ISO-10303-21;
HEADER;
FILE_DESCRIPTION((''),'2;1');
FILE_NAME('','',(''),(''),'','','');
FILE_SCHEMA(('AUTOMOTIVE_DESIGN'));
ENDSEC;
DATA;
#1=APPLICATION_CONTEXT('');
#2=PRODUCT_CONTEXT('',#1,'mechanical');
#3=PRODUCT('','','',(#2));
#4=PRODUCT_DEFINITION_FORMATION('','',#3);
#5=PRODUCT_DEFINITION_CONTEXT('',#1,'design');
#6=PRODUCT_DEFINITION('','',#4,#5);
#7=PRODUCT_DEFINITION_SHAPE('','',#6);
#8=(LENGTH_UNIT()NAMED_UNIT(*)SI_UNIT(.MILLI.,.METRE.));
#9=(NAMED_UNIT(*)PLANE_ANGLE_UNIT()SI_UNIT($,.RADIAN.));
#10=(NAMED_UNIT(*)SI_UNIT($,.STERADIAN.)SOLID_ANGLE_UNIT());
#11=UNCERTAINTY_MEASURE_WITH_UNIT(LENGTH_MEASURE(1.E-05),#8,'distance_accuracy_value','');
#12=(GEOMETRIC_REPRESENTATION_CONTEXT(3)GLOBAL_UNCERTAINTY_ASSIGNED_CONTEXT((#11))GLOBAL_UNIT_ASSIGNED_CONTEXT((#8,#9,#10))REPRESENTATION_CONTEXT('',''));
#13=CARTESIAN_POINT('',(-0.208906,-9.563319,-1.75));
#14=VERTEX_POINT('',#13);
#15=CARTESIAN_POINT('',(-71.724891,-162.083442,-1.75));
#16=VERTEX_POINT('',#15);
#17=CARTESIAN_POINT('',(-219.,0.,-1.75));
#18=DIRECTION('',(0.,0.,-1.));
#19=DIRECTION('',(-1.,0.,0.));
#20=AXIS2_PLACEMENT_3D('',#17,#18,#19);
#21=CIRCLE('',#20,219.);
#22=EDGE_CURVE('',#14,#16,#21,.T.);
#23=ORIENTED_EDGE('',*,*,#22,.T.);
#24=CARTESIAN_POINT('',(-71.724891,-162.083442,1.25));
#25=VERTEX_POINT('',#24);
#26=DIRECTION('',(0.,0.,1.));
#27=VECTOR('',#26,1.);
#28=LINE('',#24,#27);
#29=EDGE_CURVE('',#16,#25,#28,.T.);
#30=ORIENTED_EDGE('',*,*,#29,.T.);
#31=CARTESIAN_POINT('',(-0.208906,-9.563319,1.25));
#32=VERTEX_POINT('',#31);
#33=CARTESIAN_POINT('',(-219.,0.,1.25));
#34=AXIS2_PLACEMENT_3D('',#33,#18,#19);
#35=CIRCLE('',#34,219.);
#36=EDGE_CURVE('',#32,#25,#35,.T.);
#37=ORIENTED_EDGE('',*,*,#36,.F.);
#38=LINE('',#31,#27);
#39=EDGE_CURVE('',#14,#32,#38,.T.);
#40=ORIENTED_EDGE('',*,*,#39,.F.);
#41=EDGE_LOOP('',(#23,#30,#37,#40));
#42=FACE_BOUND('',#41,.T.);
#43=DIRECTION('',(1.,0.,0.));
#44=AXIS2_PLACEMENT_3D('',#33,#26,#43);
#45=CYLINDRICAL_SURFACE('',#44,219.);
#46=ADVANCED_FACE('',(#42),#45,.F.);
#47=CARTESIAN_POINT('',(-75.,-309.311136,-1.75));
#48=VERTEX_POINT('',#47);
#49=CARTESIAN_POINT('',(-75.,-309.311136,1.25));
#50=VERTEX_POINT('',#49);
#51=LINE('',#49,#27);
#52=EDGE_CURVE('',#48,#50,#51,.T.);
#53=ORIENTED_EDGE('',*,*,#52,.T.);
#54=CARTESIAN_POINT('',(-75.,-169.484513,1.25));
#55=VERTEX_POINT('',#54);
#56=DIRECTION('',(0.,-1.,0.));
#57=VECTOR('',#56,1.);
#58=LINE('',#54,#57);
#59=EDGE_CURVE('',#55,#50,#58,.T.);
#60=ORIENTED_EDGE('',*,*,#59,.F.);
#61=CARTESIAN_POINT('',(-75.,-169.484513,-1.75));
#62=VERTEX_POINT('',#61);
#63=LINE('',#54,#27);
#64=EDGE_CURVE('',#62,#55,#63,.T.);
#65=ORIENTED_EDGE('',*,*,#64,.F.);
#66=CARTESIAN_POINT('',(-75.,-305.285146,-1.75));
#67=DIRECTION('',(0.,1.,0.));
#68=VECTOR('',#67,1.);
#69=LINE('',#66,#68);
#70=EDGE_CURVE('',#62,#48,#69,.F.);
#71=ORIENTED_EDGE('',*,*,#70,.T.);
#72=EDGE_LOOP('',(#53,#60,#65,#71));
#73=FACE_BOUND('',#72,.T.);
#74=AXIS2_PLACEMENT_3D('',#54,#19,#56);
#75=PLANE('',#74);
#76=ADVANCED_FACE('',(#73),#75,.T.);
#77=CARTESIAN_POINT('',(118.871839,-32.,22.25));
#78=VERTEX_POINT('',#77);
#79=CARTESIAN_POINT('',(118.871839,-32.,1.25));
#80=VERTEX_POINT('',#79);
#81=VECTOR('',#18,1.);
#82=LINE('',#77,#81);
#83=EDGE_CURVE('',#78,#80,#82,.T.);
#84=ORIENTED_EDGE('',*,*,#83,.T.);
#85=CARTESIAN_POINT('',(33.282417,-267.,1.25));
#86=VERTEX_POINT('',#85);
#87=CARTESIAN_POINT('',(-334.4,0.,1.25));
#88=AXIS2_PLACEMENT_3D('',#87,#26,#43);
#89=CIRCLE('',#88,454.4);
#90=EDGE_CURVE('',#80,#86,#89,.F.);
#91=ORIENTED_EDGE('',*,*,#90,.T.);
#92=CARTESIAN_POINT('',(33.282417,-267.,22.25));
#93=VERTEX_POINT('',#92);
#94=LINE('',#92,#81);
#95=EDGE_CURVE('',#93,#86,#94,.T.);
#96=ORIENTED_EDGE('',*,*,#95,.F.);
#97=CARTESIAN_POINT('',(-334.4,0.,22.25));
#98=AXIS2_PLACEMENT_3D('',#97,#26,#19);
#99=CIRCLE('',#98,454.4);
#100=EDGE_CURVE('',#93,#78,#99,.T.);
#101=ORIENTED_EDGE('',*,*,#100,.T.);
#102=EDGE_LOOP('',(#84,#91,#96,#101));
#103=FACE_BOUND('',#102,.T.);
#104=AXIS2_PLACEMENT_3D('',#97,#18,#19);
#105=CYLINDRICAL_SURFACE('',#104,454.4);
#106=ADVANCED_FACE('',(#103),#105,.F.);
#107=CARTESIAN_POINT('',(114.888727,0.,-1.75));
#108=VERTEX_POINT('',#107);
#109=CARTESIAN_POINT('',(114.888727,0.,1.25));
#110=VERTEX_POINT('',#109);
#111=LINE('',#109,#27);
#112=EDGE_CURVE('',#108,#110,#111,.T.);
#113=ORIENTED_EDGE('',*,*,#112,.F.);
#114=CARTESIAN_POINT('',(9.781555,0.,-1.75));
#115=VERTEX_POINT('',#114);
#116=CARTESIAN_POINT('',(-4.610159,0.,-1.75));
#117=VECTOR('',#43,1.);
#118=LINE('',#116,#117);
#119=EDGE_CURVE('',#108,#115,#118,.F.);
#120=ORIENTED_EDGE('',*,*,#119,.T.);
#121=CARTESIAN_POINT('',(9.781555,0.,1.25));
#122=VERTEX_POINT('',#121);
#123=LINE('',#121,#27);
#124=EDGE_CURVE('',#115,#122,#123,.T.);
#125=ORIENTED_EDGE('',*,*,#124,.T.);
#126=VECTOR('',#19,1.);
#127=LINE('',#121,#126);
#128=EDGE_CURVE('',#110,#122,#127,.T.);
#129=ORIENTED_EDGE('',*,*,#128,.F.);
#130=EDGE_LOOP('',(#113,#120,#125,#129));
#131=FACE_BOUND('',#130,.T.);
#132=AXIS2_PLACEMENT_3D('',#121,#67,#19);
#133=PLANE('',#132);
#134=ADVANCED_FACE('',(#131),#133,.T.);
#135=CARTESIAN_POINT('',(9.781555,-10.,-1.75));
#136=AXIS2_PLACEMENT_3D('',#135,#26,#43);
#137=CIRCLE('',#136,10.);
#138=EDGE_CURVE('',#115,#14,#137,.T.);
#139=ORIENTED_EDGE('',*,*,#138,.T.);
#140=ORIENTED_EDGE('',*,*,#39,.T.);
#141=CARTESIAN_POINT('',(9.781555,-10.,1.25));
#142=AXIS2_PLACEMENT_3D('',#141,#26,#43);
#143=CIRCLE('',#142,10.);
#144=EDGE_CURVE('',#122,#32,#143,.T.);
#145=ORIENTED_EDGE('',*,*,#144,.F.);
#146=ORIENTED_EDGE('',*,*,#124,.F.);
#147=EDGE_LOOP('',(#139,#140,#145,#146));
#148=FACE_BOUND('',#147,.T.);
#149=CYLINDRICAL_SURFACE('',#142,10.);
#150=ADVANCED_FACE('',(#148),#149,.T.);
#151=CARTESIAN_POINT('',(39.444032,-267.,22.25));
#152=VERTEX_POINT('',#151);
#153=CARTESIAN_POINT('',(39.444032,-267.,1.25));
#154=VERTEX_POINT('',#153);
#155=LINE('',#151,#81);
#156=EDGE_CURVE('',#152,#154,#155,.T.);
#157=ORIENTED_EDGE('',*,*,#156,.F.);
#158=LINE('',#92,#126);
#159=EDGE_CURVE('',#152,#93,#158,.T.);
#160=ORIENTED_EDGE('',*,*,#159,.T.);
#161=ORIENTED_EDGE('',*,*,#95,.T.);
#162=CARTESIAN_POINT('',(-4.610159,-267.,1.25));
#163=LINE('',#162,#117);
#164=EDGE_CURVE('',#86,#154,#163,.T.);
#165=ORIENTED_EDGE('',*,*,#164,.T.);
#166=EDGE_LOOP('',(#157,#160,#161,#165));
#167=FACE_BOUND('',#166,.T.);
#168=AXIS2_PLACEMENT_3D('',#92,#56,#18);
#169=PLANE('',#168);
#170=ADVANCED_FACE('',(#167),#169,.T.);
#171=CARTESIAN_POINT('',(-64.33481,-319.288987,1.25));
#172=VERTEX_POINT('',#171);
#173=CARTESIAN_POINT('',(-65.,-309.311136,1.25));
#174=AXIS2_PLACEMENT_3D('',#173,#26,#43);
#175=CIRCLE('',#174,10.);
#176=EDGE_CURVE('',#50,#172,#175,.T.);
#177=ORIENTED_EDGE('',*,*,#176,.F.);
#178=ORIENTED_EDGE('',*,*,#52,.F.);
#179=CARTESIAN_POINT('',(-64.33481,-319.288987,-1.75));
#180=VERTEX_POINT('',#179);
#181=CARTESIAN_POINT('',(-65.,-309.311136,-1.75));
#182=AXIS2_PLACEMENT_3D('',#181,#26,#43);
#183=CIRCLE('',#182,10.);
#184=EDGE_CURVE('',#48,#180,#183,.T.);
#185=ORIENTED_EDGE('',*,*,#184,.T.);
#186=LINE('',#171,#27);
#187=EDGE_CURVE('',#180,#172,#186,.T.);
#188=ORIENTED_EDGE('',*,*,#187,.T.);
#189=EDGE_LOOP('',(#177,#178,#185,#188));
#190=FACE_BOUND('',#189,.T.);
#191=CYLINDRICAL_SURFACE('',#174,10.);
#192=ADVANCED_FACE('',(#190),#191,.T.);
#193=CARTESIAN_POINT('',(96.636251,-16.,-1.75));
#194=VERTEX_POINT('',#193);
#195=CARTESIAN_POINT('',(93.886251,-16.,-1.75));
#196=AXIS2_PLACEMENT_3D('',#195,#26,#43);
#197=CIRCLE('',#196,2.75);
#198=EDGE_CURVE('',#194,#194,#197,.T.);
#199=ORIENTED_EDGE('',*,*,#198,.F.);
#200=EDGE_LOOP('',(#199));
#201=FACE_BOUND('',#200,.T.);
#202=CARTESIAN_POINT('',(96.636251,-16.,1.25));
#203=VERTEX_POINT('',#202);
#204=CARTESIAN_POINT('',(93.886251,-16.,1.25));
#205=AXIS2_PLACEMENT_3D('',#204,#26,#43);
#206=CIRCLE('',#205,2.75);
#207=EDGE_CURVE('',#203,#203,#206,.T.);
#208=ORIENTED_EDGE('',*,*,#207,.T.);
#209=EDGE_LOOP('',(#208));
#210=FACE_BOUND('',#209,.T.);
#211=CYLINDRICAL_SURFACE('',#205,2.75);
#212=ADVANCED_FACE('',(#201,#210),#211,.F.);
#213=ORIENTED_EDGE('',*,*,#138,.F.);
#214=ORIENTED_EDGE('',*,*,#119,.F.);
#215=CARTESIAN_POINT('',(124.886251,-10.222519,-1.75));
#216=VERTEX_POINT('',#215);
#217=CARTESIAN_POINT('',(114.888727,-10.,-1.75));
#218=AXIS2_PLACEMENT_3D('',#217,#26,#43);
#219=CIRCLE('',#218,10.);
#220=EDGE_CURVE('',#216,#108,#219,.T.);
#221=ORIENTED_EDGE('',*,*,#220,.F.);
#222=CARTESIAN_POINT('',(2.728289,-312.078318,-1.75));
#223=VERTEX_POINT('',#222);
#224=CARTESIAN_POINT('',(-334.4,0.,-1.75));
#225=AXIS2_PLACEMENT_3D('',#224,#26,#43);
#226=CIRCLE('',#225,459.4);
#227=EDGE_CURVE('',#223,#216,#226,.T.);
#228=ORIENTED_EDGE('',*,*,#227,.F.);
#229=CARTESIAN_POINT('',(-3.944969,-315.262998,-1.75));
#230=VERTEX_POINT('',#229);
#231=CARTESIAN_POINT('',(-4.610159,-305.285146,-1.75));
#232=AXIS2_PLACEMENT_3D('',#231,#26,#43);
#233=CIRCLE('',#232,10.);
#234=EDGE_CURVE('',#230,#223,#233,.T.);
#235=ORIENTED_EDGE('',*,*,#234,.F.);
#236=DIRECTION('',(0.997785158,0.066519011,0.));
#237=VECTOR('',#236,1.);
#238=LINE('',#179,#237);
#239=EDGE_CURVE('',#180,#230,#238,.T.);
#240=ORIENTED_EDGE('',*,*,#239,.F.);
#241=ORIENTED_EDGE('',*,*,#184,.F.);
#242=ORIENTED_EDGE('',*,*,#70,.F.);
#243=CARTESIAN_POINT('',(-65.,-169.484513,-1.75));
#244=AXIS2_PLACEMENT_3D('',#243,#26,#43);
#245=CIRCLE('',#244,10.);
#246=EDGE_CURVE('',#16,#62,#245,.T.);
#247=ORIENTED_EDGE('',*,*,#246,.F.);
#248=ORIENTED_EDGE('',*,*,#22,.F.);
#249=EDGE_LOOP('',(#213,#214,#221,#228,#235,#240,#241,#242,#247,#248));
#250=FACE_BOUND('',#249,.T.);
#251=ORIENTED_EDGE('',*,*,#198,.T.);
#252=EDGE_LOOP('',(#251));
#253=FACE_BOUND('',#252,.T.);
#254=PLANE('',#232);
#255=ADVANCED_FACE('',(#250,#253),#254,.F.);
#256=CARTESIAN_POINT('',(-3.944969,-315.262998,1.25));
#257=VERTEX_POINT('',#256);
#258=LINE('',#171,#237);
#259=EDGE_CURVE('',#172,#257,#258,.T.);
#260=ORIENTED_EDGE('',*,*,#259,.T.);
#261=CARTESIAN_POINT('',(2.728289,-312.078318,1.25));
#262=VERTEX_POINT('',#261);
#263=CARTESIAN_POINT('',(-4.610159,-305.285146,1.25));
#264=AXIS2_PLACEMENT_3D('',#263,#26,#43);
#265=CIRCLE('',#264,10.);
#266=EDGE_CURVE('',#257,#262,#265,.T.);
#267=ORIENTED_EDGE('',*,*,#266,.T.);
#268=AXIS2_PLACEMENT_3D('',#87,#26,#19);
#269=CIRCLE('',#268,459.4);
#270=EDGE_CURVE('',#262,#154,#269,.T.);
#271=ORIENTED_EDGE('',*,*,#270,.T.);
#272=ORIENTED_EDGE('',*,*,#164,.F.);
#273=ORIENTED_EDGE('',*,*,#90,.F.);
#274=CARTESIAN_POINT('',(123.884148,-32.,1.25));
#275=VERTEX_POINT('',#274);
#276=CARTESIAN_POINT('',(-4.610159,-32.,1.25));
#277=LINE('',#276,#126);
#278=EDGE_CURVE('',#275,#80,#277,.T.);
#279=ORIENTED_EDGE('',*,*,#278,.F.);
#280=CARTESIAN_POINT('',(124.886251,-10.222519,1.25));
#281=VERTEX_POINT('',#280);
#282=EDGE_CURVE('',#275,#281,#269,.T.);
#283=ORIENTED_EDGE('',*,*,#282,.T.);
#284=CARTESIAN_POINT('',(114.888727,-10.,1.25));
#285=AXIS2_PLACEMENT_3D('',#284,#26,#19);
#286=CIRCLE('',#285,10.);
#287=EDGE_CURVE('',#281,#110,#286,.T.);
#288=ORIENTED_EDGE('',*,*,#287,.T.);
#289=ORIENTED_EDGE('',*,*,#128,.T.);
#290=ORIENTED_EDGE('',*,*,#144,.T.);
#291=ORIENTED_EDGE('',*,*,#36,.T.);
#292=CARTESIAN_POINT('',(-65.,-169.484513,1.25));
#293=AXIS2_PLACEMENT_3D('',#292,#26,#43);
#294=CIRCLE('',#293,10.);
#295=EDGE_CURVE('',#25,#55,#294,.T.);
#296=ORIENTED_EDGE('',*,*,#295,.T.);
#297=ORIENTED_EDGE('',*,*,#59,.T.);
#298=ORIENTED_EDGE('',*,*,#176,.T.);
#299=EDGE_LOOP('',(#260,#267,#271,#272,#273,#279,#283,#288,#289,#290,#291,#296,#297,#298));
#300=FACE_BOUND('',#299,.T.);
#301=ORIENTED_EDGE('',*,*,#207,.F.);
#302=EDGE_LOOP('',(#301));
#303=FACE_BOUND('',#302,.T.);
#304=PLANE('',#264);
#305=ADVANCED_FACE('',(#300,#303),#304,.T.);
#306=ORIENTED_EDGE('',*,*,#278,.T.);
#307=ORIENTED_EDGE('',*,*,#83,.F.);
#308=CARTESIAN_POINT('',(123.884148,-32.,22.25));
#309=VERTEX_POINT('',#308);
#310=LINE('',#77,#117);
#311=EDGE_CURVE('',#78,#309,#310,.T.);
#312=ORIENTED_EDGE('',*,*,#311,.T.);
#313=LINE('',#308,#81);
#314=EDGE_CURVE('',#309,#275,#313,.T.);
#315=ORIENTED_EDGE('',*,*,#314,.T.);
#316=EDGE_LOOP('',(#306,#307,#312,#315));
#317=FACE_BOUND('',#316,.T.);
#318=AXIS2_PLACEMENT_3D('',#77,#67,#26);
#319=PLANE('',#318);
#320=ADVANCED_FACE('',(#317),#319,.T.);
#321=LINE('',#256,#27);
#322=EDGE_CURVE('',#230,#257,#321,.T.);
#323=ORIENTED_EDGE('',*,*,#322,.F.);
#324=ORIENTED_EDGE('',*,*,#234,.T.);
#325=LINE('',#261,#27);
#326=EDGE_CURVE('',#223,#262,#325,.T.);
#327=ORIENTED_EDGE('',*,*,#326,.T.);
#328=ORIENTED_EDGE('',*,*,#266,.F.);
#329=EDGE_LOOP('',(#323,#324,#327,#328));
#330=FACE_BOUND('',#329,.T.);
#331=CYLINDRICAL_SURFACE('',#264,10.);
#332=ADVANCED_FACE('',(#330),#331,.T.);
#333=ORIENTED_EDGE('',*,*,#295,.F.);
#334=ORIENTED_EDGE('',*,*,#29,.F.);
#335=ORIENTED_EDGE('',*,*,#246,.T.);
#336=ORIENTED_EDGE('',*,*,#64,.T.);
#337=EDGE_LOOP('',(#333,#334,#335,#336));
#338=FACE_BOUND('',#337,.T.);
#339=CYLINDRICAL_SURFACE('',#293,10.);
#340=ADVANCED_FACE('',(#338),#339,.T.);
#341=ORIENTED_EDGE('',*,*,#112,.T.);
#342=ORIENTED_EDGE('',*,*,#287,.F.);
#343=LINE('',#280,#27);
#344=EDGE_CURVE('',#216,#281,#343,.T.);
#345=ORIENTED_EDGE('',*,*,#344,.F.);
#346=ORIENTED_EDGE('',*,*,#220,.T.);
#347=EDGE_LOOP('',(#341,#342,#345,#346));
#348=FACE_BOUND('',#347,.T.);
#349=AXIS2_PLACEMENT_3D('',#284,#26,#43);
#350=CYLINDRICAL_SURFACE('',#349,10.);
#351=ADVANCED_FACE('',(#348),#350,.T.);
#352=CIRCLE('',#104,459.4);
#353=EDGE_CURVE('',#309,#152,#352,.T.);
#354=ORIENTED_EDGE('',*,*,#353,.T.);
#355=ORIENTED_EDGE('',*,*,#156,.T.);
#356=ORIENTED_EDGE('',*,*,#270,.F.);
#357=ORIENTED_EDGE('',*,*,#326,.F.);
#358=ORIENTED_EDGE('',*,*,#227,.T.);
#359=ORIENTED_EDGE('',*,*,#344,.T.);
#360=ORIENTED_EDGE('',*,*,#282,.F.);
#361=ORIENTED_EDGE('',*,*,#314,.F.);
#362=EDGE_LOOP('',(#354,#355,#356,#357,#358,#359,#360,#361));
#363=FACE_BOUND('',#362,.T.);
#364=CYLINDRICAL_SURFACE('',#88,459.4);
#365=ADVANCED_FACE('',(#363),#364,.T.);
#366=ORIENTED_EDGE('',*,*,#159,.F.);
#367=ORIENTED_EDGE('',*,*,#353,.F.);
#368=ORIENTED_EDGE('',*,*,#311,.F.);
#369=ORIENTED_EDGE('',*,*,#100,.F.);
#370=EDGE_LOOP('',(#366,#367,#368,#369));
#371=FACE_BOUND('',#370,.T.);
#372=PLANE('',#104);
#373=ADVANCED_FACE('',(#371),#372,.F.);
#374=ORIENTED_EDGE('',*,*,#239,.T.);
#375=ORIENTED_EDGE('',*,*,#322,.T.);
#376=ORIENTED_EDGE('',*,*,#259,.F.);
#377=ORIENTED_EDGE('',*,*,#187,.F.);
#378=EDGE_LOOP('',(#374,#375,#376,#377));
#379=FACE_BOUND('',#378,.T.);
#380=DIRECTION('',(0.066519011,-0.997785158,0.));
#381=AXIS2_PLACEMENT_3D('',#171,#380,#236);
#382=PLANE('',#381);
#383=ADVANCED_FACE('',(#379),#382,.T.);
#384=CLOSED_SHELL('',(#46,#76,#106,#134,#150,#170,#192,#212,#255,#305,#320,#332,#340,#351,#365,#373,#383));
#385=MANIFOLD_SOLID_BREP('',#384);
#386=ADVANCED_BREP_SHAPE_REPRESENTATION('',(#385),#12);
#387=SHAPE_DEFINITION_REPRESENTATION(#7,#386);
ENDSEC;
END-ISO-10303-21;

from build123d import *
from build123d.topology import SkipClean

# Parameters (mm, degrees)
RESSALTO_EXTRUS_O1_DEPTH    = 1.25
ESBO_O2_R                   = 2.75
CORTE_EXTRUS_O1_DEPTH       = 343.874678981
CONVERTER_S_LIDO1_START     = -1.75
CONVERTER_S_LIDO1_OUTLINE_R = 2.75
CONVERTER_S_LIDO1_DEPTH     = 0.5
RESSALTO_EXTRUS_O2_DEPTH    = 24


# Read off the part's stored shape, not the designer's step: Converter-Sólido1
with BuildPart() as part:
    # Esboço1 → Ressalto-extrusão1 (new, symmetric)
    with BuildSketch(Plane.XY):
        with BuildLine():
            Line((9.781555201, 0), (114.888726767, 0))
            ThreePointArc((114.888726767, 0), (122.038034046, -3.008047095), (124.886250727, -10.222518914))
            ThreePointArc((124.886250727, -10.222518914), (91.45004484, -172.337167523), (2.728289048, -312.078318252))
            ThreePointArc((2.728289048, -312.078318252), (-0.303175893, -314.310106116), (-3.944968584, -315.262997906))
            Line((-3.944968584, -315.262997906), (-64.334809895, -319.288987326))
            ThreePointArc((-64.334809895, -319.288987326), (-71.831840855, -316.613597697), (-75, -309.311135748))
            Line((-75, -309.311135748), (-75, -169.484512567))
            ThreePointArc((-75, -169.484512567), (-74.144640734, -165.437841608), (-71.72489083, -162.083442149))
            ThreePointArc((-71.72489083, -162.083442149), (-20.715574655, -92.974656039), (-0.208905725, -9.563318777))
            ThreePointArc((-0.208905725, -9.563318777), (2.866600834, -2.776191717), (9.781555201, 0))
        make_face()
    extrude(amount=RESSALTO_EXTRUS_O1_DEPTH, both=True)

    # Esboço2 → Corte-extrusão1 (cut, through all)
    with BuildSketch(Plane.XY.offset(1.25)):
        with Locations((93.886250727, -16)):
            Circle(ESBO_O2_R)
    extrude(amount=-CORTE_EXTRUS_O1_DEPTH, mode=Mode.SUBTRACT)

    # Converter-Sólido1 outline → Converter-Sólido1 (add)
    with BuildSketch(Plane.XY.offset(CONVERTER_S_LIDO1_START)):
        with BuildLine():
            ThreePointArc((2.728289048, -312.078318252), (91.45004484, -172.337167523), (124.886250727, -10.222518914))
            ThreePointArc((124.886250727, -10.222518914), (122.038034046, -3.008047095), (114.888726767, 0))
            Line((114.888726767, 0), (9.781555201, 0))
            ThreePointArc((9.781555201, 0), (2.866600835, -2.776191716), (-0.208905725, -9.563318777))
            ThreePointArc((-0.208905725, -9.563318777), (-20.715574655, -92.974656038), (-71.72489083, -162.083442149))
            ThreePointArc((-71.72489083, -162.083442149), (-74.144640734, -165.437841608), (-75, -169.484512567))
            Line((-75, -169.484512567), (-75, -309.311135748))
            ThreePointArc((-75, -309.311135748), (-71.831840855, -316.613597697), (-64.334809895, -319.288987326))
            Line((-64.334809895, -319.288987326), (-3.944968584, -315.262997906))
            ThreePointArc((-3.944968584, -315.262997906), (-0.303175894, -314.310106116), (2.728289048, -312.078318252))
        make_face()
        with Locations((93.886250727, -16)):
            Circle(CONVERTER_S_LIDO1_OUTLINE_R, mode=Mode.SUBTRACT)
    extrude(amount=CONVERTER_S_LIDO1_DEPTH)

    # Esboço8 → Ressalto-extrusão2 (add)
    with SkipClean():  # the faces are left unmerged after this step: merging them gives an invalid solid
        with BuildSketch(Plane(origin=(0, 0, -1.75), x_dir=(-1, 0, 0), z_dir=(0, 0, -1))):
            with BuildLine():
                Line((-118.871838966, -32), (-123.884147664, -32))
                ThreePointArc((-123.884147664, -32), (-97.937341323, -155.347298973), (-39.44403165, -267))
                Line((-39.44403165, -267), (-33.282417311, -267))
                ThreePointArc((-33.282417311, -267), (-92.563373986, -155.504460627), (-118.871838966, -32))
            make_face()
        extrude(amount=-RESSALTO_EXTRUS_O2_DEPTH)


solid = part.part
